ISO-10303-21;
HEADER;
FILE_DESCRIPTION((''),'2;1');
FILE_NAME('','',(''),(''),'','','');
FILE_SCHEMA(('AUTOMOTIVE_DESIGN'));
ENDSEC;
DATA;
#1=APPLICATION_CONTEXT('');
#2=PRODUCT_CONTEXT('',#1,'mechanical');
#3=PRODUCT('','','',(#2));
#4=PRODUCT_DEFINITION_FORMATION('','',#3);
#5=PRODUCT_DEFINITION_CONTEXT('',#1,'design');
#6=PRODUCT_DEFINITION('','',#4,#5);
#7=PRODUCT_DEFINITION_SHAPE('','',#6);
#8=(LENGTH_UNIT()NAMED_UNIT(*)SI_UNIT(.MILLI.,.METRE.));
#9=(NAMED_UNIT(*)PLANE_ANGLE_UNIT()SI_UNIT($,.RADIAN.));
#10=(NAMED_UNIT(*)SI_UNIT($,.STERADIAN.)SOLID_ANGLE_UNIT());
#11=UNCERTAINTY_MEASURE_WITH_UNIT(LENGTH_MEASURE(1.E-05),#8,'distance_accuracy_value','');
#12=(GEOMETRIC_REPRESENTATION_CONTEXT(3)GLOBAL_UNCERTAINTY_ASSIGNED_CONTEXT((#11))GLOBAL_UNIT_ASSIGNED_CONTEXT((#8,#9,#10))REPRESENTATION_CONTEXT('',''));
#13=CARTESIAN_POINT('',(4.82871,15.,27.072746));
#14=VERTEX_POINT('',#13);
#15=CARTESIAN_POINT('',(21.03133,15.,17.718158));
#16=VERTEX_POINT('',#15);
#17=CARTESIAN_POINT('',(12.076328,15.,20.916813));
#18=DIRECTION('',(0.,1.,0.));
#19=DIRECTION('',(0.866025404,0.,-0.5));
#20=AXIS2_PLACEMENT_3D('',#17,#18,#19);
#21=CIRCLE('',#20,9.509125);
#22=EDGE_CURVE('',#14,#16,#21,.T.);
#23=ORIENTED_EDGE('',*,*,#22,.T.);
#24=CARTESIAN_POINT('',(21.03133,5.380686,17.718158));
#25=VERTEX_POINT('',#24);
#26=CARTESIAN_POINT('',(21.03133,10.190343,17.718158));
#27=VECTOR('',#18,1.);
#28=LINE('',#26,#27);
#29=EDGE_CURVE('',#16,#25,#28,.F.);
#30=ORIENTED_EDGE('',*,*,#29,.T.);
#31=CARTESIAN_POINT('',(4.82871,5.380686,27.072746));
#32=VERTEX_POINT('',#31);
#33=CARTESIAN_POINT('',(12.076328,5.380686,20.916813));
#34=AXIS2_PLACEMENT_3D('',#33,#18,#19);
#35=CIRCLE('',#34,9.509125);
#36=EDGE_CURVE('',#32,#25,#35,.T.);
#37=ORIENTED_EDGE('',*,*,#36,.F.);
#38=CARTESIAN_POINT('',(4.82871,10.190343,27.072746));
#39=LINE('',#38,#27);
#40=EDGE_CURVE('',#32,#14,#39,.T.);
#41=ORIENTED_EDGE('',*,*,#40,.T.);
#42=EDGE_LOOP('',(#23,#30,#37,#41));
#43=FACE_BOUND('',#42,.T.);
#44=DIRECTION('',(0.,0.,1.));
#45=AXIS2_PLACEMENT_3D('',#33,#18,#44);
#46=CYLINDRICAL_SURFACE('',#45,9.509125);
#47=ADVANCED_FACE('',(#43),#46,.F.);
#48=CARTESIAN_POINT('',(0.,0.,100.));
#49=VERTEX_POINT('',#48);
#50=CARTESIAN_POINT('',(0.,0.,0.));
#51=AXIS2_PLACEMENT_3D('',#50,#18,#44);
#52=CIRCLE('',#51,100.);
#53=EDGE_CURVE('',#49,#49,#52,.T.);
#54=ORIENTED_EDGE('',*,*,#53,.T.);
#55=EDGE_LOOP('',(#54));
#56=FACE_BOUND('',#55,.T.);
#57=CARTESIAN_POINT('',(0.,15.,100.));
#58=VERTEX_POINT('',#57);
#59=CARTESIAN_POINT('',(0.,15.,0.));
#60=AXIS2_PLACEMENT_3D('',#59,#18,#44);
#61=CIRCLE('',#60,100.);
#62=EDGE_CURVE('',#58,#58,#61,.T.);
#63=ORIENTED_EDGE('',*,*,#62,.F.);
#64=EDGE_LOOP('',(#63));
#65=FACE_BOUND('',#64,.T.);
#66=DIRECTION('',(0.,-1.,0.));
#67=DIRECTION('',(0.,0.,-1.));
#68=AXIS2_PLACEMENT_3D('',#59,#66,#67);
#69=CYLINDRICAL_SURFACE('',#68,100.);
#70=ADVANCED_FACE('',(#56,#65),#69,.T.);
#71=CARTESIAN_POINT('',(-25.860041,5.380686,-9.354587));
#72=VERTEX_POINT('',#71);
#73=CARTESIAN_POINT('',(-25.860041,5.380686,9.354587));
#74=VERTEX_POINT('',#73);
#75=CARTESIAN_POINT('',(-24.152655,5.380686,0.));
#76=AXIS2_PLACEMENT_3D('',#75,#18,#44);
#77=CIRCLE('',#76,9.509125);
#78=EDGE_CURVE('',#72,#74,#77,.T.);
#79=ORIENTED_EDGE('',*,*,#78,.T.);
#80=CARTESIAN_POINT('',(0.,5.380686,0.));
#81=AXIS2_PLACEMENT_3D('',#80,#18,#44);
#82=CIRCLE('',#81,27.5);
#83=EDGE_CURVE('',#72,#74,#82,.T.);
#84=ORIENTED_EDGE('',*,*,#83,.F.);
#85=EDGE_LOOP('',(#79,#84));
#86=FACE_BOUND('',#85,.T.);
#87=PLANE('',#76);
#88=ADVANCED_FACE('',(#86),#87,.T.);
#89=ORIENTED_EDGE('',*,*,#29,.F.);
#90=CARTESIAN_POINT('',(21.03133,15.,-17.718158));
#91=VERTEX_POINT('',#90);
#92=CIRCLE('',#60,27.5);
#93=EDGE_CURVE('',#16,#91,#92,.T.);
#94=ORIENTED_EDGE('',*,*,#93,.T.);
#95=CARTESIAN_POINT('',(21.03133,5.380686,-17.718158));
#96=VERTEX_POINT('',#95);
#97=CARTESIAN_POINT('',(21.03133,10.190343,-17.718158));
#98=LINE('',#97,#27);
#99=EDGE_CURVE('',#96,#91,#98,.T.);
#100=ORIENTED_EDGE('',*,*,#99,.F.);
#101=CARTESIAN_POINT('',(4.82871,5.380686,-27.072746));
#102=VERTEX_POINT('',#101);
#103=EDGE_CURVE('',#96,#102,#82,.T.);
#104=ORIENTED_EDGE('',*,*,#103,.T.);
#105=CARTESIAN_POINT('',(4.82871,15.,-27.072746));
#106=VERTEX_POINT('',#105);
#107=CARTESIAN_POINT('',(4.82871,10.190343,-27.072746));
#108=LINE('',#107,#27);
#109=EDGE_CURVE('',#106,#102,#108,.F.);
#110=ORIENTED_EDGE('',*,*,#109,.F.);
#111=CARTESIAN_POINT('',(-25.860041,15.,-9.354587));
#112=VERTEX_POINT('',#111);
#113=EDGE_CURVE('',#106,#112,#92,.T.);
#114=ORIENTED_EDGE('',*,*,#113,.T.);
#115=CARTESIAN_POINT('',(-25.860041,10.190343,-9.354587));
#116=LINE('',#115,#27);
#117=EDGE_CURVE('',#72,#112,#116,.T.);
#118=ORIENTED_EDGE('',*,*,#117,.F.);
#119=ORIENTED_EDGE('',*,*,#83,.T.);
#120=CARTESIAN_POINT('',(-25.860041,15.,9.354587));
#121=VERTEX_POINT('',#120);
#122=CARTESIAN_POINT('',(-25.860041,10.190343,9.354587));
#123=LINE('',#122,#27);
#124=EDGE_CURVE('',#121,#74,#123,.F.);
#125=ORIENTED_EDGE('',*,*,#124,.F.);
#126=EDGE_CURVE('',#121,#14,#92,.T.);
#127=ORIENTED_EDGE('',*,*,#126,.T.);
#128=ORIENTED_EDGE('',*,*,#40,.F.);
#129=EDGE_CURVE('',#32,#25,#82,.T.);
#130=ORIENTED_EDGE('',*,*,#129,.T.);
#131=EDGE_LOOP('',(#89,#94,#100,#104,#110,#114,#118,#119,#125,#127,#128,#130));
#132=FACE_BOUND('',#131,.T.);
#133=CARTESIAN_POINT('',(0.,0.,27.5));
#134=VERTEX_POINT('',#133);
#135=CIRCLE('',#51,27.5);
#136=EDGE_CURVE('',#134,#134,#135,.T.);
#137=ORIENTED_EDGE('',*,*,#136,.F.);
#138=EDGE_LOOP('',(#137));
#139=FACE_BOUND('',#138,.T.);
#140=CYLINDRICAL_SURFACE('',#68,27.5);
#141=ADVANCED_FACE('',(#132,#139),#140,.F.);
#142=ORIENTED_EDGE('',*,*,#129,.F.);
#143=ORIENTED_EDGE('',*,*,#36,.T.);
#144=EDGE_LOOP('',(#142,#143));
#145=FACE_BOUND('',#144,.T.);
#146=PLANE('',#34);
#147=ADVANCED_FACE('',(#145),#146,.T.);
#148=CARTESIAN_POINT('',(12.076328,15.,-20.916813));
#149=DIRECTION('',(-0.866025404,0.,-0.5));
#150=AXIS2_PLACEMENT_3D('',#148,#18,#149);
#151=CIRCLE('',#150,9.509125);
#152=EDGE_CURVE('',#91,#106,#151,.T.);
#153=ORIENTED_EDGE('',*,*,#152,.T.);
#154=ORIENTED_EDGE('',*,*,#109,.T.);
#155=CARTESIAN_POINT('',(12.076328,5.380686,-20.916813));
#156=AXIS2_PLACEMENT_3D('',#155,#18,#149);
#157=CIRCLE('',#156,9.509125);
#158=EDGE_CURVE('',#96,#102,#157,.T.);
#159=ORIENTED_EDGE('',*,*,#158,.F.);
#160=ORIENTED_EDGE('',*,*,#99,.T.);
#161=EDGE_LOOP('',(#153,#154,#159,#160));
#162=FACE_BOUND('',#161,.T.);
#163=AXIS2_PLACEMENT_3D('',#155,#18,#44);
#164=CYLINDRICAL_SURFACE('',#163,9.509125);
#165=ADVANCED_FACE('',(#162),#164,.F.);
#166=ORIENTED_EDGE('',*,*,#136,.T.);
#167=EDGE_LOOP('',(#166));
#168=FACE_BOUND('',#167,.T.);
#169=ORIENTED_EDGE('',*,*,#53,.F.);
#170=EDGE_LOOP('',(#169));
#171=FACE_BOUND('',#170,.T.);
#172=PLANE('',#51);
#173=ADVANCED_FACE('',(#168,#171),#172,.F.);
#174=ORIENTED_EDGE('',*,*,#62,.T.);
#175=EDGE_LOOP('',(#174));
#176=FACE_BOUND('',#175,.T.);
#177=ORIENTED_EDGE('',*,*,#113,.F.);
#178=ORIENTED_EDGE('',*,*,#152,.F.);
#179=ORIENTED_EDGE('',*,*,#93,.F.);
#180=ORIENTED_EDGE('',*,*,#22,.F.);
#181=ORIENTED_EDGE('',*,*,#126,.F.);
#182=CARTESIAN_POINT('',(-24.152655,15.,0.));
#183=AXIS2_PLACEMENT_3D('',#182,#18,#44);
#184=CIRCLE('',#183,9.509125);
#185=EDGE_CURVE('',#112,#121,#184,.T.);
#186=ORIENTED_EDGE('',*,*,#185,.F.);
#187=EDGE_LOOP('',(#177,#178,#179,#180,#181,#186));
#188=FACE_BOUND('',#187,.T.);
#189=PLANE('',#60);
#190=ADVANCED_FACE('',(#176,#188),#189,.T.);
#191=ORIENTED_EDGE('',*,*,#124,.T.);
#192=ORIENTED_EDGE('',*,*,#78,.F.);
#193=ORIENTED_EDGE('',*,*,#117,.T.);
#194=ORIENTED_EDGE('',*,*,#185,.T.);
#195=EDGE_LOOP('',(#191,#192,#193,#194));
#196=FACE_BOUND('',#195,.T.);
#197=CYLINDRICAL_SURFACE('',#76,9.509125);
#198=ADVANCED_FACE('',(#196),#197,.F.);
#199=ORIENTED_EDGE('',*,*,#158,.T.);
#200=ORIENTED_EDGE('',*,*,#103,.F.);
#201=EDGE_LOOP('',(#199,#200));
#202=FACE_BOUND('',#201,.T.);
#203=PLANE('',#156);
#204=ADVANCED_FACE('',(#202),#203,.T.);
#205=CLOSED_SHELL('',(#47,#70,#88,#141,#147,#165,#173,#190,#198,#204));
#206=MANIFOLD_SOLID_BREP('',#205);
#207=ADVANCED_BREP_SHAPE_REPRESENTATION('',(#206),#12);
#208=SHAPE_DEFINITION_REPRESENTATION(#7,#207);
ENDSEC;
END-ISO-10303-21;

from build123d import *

# Parameters (mm, degrees)
SKETCH1_R           = 100
BOSS_EXTRUDE1_DEPTH = 15
SKETCH2_R           = 27.5
CUT_EXTRUDE1_DEPTH  = 143.214626533
SKETCH3_R           = 9.509125407
CUT_EXTRUDE2_DEPTH  = 9.619313814
CIRPATTERN1_COUNT   = 3


with BuildPart() as part:
    # Sketch1 → Boss-Extrude1 (new body)
    with BuildSketch(Plane(origin=(0, 0, 0), x_dir=(1, 0, 0), z_dir=(0, 1, 0))):
        Circle(SKETCH1_R)
    extrude(amount=BOSS_EXTRUDE1_DEPTH)

    # Sketch2 → Cut-Extrude1 (cut, through all)
    with BuildSketch(Plane(origin=(0, 0, 0), x_dir=(1, 0, 0), z_dir=(0, 1, 0))):
        Circle(SKETCH2_R)
    extrude(amount=CUT_EXTRUDE1_DEPTH, mode=Mode.SUBTRACT)

    # Sketch3 → Cut-Extrude2 (cut)
    with BuildSketch(Plane(origin=(0, 15, 0), x_dir=(1, 0, 0), z_dir=(0, 1, 0))):
        with Locations((-24.152655471, 0)):
            Circle(SKETCH3_R)
    cut_extrude2 = extrude(amount=-CUT_EXTRUDE2_DEPTH, mode=Mode.SUBTRACT)

    # CirPattern1: Cut-Extrude2 ×3 about axis
    cirpattern1_axis = Axis((0, 0, 0), (0, 1, 0))
    for i in range(1, CIRPATTERN1_COUNT):
        add(cut_extrude2.rotate(cirpattern1_axis, i * 360 / CIRPATTERN1_COUNT), mode=Mode.SUBTRACT)


solid = part.part
